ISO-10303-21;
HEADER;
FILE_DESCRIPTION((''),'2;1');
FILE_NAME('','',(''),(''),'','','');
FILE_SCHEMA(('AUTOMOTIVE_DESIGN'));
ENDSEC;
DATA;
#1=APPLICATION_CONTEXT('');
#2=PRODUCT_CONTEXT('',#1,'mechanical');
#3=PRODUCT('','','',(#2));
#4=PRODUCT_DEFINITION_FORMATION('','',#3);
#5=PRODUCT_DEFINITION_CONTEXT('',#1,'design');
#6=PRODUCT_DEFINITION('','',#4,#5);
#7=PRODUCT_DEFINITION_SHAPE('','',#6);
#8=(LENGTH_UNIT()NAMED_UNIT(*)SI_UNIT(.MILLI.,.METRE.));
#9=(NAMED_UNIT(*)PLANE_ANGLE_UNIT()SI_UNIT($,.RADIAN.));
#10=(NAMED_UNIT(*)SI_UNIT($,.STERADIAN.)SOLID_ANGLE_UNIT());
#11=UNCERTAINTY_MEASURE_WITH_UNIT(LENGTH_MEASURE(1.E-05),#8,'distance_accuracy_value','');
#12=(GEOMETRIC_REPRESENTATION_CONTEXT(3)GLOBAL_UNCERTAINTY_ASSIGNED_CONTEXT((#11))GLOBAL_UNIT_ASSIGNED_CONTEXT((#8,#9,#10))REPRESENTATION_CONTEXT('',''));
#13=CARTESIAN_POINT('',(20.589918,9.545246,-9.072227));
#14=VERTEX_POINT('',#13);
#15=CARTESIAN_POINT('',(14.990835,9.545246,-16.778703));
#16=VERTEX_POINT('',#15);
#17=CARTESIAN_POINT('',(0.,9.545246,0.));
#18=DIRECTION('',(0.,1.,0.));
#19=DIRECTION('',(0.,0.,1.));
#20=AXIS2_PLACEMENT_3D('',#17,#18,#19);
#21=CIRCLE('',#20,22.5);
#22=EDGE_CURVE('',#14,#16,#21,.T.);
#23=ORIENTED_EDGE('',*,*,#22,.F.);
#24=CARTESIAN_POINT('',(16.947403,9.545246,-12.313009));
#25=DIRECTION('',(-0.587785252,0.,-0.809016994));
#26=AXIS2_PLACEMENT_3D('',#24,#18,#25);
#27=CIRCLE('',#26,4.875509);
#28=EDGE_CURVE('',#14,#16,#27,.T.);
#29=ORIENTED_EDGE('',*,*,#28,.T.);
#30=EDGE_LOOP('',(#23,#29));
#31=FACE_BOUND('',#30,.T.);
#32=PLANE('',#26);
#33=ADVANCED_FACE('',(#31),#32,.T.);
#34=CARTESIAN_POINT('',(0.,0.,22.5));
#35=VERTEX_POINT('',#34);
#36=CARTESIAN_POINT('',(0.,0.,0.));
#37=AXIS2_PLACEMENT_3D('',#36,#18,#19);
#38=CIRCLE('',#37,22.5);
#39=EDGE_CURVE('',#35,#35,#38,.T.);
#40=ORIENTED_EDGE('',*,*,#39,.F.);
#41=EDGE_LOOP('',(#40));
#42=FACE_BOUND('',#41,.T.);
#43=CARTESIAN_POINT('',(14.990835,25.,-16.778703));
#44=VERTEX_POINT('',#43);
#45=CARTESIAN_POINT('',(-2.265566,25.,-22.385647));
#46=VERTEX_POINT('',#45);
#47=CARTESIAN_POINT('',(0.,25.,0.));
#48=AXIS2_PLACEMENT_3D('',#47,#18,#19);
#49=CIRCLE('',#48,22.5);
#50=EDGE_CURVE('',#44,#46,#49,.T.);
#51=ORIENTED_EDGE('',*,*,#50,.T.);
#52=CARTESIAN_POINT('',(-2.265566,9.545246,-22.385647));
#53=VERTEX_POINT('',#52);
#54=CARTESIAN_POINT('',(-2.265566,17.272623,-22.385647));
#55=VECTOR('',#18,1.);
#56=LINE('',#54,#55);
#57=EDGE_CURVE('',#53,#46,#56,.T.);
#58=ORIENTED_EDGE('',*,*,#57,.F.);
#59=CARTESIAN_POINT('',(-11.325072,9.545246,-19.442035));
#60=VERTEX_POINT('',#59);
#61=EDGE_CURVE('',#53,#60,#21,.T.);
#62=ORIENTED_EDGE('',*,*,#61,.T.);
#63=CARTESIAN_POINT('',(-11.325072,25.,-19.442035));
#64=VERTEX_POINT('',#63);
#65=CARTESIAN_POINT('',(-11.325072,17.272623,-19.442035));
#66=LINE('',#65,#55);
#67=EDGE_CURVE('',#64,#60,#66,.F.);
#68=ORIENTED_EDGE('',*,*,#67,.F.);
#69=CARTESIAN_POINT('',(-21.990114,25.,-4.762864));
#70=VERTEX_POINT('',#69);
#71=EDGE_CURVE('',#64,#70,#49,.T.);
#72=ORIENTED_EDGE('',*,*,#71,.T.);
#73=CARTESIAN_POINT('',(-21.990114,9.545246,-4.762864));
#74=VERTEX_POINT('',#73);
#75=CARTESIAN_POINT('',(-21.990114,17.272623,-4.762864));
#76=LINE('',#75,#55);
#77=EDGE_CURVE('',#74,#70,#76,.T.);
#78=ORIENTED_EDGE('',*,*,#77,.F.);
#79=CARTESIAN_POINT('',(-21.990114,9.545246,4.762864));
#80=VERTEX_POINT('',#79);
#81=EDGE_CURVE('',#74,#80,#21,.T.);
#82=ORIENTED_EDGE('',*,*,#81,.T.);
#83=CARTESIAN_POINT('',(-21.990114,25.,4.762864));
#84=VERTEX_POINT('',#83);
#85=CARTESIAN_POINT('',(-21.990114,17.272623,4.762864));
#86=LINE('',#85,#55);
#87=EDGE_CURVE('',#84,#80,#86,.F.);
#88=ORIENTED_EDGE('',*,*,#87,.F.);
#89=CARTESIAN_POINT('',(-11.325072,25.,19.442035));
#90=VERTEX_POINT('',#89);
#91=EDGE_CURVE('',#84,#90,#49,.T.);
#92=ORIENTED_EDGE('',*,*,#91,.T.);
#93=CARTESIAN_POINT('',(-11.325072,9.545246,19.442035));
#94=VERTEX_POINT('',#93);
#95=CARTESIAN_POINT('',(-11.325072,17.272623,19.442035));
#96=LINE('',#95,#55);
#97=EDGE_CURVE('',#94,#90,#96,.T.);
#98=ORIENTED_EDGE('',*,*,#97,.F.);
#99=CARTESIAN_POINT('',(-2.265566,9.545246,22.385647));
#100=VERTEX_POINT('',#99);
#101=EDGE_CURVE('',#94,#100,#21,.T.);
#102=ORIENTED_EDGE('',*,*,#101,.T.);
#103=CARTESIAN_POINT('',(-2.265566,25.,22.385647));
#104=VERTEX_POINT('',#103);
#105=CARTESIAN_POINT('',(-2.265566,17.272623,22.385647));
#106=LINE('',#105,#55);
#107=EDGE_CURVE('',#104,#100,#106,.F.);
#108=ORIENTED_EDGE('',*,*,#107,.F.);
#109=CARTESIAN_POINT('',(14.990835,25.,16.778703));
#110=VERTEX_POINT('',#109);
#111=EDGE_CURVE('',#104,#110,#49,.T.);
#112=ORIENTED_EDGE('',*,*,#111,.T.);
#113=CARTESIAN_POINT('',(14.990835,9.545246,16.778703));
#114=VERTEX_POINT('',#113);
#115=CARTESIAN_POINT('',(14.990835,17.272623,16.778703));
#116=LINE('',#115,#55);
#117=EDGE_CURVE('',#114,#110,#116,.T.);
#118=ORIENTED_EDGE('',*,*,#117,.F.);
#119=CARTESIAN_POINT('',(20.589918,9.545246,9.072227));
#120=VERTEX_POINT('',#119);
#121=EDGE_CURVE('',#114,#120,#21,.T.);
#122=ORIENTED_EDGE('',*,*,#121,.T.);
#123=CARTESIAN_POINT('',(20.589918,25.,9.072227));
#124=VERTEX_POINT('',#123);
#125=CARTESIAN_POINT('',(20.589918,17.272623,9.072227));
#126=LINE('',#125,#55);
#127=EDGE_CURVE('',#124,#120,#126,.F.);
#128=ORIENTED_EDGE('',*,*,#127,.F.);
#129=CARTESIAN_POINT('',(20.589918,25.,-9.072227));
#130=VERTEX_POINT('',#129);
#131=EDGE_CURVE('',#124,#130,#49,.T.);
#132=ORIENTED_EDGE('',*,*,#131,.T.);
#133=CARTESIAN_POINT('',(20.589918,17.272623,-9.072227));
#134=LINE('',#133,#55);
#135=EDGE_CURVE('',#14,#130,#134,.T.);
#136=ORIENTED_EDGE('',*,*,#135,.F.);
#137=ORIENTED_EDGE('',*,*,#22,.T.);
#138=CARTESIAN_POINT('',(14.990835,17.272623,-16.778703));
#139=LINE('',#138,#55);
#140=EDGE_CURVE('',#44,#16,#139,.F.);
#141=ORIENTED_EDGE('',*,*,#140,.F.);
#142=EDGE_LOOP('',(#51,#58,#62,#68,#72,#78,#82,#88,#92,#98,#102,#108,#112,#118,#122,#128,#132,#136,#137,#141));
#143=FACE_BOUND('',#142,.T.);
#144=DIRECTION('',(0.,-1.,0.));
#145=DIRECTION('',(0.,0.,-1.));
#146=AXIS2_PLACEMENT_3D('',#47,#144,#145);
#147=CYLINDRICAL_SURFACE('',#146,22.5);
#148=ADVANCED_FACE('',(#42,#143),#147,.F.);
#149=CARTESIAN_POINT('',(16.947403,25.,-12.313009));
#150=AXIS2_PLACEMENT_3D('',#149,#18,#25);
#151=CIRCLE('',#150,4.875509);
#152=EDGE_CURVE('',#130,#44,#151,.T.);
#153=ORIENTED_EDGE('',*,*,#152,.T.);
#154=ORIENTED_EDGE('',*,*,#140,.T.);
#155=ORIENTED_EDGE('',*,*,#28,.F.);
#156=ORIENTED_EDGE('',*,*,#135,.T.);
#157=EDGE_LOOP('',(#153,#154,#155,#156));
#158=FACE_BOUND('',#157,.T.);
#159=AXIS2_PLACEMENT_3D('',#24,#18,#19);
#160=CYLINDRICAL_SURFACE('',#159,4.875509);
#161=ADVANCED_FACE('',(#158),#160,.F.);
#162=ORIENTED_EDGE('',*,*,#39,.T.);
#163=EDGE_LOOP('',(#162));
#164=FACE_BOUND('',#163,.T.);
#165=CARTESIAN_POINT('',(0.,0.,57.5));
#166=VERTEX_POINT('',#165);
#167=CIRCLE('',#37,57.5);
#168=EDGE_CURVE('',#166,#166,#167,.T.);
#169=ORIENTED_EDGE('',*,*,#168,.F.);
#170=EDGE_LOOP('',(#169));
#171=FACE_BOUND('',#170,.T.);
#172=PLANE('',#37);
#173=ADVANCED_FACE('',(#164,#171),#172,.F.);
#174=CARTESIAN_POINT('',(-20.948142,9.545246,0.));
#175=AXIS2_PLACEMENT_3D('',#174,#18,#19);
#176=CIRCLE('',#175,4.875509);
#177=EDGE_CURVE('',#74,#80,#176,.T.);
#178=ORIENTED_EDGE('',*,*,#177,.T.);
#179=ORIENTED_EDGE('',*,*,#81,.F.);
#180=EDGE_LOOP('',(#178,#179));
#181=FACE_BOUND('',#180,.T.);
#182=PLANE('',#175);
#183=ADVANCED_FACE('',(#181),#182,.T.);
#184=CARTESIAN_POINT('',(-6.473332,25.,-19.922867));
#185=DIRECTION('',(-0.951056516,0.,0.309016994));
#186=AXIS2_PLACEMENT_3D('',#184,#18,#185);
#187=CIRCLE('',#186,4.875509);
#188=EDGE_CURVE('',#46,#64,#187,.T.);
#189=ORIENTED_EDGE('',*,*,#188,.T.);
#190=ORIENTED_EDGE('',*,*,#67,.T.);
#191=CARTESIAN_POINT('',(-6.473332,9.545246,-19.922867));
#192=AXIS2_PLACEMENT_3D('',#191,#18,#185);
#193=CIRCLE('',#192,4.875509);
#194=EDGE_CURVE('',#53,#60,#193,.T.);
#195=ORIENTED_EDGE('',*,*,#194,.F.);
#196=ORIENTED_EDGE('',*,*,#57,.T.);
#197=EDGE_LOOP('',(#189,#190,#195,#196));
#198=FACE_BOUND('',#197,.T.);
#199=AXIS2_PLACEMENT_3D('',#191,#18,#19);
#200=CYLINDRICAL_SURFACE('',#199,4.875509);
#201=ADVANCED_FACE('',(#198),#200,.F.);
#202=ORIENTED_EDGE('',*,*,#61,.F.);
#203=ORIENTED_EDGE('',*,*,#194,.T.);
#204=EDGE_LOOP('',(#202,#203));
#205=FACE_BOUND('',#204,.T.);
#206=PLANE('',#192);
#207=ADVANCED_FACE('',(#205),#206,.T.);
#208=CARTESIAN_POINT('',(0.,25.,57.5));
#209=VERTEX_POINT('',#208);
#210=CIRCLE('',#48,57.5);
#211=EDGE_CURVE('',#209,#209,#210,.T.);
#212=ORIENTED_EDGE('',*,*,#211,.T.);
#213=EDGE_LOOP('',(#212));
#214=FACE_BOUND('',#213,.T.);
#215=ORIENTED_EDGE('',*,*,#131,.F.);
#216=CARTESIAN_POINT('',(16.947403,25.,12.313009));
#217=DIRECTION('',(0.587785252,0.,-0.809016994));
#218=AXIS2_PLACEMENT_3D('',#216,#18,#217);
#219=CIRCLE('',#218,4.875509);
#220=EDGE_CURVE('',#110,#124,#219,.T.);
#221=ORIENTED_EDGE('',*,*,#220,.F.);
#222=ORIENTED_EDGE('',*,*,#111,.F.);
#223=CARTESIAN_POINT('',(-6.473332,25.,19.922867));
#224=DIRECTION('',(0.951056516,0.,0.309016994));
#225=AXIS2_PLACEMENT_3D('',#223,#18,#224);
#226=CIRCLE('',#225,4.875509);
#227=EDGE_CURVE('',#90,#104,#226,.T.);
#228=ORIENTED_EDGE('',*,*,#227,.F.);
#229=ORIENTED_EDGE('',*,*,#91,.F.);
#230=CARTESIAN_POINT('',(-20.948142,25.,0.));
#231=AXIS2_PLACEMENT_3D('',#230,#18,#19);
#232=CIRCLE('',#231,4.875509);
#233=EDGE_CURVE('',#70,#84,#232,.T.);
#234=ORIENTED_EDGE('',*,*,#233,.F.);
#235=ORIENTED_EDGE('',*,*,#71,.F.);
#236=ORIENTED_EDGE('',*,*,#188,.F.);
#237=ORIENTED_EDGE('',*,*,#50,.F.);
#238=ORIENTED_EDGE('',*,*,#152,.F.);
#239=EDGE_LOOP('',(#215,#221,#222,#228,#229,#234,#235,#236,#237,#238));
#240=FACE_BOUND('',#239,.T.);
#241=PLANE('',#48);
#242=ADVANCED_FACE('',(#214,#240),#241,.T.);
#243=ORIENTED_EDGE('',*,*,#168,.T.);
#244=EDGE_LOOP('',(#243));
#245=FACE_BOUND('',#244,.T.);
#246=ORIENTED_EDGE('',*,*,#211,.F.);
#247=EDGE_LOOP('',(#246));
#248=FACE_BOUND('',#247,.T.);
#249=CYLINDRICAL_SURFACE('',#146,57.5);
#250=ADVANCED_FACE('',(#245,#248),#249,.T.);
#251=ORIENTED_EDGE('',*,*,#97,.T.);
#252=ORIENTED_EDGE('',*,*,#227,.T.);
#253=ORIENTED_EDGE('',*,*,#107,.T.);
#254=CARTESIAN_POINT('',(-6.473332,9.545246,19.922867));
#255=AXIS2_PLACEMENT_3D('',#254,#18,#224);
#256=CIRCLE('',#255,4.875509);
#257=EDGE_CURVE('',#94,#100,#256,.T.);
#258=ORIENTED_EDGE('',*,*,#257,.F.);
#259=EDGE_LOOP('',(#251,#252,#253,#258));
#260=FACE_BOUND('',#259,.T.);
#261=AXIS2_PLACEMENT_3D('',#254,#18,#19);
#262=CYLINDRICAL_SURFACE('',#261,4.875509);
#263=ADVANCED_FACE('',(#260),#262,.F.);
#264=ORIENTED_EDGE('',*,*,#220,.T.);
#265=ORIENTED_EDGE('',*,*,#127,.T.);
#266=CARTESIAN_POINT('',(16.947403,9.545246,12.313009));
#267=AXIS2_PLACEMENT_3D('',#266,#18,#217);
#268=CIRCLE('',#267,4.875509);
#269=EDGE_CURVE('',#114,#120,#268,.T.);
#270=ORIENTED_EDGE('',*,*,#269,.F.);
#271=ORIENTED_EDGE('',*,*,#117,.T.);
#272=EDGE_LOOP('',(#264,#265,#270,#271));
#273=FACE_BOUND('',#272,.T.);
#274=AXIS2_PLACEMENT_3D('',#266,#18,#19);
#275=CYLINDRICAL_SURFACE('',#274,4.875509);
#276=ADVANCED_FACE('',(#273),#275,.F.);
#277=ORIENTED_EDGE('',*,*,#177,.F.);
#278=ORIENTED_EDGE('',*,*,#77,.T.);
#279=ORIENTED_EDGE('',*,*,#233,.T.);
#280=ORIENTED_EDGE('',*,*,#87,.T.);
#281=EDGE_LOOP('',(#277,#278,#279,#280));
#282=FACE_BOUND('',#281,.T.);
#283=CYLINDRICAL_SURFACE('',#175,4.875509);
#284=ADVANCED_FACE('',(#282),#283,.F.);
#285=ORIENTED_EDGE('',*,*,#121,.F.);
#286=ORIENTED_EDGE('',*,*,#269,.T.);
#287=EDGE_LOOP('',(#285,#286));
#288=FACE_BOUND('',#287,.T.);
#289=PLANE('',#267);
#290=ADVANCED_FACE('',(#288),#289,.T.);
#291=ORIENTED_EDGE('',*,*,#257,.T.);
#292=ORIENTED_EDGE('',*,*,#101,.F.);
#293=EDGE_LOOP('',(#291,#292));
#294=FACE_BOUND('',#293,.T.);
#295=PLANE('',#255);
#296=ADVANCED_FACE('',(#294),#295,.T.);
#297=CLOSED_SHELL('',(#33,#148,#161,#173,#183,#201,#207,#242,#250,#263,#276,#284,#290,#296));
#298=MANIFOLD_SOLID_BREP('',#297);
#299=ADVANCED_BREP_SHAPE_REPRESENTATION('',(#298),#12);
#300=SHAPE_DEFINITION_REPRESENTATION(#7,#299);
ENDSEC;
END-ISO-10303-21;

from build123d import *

# Parameters (mm, degrees)
SKETCH1_R           = 57.5
BOSS_EXTRUDE1_DEPTH = 25
SKETCH2_R           = 22.5
CUT_EXTRUDE1_DEPTH  = 86.073497636
SKETCH3_R           = 4.875508637
CUT_EXTRUDE2_DEPTH  = 15.454754419
CIRPATTERN1_COUNT   = 5


with BuildPart() as part:
    # Sketch1 → Boss-Extrude1 (new body)
    with BuildSketch(Plane(origin=(0, 0, 0), x_dir=(1, 0, 0), z_dir=(0, 1, 0))):
        Circle(SKETCH1_R)
    extrude(amount=BOSS_EXTRUDE1_DEPTH)

    # Sketch2 → Cut-Extrude1 (cut, through all)
    with BuildSketch(Plane(origin=(0, 0, 0), x_dir=(1, 0, 0), z_dir=(0, 1, 0))):
        Circle(SKETCH2_R)
    extrude(amount=CUT_EXTRUDE1_DEPTH, mode=Mode.SUBTRACT)

    # Sketch3 → Cut-Extrude2 (cut)
    with BuildSketch(Plane(origin=(0, 25, 0), x_dir=(1, 0, 0), z_dir=(0, 1, 0))):
        with Locations((-20.9481418, 0)):
            Circle(SKETCH3_R)
    cut_extrude2 = extrude(amount=-CUT_EXTRUDE2_DEPTH, mode=Mode.SUBTRACT)

    # CirPattern1: Cut-Extrude2 ×5 about axis
    cirpattern1_axis = Axis((0, 0, 0), (0, 1, 0))
    for i in range(1, CIRPATTERN1_COUNT):
        add(cut_extrude2.rotate(cirpattern1_axis, i * 360 / CIRPATTERN1_COUNT), mode=Mode.SUBTRACT)


solid = part.part
